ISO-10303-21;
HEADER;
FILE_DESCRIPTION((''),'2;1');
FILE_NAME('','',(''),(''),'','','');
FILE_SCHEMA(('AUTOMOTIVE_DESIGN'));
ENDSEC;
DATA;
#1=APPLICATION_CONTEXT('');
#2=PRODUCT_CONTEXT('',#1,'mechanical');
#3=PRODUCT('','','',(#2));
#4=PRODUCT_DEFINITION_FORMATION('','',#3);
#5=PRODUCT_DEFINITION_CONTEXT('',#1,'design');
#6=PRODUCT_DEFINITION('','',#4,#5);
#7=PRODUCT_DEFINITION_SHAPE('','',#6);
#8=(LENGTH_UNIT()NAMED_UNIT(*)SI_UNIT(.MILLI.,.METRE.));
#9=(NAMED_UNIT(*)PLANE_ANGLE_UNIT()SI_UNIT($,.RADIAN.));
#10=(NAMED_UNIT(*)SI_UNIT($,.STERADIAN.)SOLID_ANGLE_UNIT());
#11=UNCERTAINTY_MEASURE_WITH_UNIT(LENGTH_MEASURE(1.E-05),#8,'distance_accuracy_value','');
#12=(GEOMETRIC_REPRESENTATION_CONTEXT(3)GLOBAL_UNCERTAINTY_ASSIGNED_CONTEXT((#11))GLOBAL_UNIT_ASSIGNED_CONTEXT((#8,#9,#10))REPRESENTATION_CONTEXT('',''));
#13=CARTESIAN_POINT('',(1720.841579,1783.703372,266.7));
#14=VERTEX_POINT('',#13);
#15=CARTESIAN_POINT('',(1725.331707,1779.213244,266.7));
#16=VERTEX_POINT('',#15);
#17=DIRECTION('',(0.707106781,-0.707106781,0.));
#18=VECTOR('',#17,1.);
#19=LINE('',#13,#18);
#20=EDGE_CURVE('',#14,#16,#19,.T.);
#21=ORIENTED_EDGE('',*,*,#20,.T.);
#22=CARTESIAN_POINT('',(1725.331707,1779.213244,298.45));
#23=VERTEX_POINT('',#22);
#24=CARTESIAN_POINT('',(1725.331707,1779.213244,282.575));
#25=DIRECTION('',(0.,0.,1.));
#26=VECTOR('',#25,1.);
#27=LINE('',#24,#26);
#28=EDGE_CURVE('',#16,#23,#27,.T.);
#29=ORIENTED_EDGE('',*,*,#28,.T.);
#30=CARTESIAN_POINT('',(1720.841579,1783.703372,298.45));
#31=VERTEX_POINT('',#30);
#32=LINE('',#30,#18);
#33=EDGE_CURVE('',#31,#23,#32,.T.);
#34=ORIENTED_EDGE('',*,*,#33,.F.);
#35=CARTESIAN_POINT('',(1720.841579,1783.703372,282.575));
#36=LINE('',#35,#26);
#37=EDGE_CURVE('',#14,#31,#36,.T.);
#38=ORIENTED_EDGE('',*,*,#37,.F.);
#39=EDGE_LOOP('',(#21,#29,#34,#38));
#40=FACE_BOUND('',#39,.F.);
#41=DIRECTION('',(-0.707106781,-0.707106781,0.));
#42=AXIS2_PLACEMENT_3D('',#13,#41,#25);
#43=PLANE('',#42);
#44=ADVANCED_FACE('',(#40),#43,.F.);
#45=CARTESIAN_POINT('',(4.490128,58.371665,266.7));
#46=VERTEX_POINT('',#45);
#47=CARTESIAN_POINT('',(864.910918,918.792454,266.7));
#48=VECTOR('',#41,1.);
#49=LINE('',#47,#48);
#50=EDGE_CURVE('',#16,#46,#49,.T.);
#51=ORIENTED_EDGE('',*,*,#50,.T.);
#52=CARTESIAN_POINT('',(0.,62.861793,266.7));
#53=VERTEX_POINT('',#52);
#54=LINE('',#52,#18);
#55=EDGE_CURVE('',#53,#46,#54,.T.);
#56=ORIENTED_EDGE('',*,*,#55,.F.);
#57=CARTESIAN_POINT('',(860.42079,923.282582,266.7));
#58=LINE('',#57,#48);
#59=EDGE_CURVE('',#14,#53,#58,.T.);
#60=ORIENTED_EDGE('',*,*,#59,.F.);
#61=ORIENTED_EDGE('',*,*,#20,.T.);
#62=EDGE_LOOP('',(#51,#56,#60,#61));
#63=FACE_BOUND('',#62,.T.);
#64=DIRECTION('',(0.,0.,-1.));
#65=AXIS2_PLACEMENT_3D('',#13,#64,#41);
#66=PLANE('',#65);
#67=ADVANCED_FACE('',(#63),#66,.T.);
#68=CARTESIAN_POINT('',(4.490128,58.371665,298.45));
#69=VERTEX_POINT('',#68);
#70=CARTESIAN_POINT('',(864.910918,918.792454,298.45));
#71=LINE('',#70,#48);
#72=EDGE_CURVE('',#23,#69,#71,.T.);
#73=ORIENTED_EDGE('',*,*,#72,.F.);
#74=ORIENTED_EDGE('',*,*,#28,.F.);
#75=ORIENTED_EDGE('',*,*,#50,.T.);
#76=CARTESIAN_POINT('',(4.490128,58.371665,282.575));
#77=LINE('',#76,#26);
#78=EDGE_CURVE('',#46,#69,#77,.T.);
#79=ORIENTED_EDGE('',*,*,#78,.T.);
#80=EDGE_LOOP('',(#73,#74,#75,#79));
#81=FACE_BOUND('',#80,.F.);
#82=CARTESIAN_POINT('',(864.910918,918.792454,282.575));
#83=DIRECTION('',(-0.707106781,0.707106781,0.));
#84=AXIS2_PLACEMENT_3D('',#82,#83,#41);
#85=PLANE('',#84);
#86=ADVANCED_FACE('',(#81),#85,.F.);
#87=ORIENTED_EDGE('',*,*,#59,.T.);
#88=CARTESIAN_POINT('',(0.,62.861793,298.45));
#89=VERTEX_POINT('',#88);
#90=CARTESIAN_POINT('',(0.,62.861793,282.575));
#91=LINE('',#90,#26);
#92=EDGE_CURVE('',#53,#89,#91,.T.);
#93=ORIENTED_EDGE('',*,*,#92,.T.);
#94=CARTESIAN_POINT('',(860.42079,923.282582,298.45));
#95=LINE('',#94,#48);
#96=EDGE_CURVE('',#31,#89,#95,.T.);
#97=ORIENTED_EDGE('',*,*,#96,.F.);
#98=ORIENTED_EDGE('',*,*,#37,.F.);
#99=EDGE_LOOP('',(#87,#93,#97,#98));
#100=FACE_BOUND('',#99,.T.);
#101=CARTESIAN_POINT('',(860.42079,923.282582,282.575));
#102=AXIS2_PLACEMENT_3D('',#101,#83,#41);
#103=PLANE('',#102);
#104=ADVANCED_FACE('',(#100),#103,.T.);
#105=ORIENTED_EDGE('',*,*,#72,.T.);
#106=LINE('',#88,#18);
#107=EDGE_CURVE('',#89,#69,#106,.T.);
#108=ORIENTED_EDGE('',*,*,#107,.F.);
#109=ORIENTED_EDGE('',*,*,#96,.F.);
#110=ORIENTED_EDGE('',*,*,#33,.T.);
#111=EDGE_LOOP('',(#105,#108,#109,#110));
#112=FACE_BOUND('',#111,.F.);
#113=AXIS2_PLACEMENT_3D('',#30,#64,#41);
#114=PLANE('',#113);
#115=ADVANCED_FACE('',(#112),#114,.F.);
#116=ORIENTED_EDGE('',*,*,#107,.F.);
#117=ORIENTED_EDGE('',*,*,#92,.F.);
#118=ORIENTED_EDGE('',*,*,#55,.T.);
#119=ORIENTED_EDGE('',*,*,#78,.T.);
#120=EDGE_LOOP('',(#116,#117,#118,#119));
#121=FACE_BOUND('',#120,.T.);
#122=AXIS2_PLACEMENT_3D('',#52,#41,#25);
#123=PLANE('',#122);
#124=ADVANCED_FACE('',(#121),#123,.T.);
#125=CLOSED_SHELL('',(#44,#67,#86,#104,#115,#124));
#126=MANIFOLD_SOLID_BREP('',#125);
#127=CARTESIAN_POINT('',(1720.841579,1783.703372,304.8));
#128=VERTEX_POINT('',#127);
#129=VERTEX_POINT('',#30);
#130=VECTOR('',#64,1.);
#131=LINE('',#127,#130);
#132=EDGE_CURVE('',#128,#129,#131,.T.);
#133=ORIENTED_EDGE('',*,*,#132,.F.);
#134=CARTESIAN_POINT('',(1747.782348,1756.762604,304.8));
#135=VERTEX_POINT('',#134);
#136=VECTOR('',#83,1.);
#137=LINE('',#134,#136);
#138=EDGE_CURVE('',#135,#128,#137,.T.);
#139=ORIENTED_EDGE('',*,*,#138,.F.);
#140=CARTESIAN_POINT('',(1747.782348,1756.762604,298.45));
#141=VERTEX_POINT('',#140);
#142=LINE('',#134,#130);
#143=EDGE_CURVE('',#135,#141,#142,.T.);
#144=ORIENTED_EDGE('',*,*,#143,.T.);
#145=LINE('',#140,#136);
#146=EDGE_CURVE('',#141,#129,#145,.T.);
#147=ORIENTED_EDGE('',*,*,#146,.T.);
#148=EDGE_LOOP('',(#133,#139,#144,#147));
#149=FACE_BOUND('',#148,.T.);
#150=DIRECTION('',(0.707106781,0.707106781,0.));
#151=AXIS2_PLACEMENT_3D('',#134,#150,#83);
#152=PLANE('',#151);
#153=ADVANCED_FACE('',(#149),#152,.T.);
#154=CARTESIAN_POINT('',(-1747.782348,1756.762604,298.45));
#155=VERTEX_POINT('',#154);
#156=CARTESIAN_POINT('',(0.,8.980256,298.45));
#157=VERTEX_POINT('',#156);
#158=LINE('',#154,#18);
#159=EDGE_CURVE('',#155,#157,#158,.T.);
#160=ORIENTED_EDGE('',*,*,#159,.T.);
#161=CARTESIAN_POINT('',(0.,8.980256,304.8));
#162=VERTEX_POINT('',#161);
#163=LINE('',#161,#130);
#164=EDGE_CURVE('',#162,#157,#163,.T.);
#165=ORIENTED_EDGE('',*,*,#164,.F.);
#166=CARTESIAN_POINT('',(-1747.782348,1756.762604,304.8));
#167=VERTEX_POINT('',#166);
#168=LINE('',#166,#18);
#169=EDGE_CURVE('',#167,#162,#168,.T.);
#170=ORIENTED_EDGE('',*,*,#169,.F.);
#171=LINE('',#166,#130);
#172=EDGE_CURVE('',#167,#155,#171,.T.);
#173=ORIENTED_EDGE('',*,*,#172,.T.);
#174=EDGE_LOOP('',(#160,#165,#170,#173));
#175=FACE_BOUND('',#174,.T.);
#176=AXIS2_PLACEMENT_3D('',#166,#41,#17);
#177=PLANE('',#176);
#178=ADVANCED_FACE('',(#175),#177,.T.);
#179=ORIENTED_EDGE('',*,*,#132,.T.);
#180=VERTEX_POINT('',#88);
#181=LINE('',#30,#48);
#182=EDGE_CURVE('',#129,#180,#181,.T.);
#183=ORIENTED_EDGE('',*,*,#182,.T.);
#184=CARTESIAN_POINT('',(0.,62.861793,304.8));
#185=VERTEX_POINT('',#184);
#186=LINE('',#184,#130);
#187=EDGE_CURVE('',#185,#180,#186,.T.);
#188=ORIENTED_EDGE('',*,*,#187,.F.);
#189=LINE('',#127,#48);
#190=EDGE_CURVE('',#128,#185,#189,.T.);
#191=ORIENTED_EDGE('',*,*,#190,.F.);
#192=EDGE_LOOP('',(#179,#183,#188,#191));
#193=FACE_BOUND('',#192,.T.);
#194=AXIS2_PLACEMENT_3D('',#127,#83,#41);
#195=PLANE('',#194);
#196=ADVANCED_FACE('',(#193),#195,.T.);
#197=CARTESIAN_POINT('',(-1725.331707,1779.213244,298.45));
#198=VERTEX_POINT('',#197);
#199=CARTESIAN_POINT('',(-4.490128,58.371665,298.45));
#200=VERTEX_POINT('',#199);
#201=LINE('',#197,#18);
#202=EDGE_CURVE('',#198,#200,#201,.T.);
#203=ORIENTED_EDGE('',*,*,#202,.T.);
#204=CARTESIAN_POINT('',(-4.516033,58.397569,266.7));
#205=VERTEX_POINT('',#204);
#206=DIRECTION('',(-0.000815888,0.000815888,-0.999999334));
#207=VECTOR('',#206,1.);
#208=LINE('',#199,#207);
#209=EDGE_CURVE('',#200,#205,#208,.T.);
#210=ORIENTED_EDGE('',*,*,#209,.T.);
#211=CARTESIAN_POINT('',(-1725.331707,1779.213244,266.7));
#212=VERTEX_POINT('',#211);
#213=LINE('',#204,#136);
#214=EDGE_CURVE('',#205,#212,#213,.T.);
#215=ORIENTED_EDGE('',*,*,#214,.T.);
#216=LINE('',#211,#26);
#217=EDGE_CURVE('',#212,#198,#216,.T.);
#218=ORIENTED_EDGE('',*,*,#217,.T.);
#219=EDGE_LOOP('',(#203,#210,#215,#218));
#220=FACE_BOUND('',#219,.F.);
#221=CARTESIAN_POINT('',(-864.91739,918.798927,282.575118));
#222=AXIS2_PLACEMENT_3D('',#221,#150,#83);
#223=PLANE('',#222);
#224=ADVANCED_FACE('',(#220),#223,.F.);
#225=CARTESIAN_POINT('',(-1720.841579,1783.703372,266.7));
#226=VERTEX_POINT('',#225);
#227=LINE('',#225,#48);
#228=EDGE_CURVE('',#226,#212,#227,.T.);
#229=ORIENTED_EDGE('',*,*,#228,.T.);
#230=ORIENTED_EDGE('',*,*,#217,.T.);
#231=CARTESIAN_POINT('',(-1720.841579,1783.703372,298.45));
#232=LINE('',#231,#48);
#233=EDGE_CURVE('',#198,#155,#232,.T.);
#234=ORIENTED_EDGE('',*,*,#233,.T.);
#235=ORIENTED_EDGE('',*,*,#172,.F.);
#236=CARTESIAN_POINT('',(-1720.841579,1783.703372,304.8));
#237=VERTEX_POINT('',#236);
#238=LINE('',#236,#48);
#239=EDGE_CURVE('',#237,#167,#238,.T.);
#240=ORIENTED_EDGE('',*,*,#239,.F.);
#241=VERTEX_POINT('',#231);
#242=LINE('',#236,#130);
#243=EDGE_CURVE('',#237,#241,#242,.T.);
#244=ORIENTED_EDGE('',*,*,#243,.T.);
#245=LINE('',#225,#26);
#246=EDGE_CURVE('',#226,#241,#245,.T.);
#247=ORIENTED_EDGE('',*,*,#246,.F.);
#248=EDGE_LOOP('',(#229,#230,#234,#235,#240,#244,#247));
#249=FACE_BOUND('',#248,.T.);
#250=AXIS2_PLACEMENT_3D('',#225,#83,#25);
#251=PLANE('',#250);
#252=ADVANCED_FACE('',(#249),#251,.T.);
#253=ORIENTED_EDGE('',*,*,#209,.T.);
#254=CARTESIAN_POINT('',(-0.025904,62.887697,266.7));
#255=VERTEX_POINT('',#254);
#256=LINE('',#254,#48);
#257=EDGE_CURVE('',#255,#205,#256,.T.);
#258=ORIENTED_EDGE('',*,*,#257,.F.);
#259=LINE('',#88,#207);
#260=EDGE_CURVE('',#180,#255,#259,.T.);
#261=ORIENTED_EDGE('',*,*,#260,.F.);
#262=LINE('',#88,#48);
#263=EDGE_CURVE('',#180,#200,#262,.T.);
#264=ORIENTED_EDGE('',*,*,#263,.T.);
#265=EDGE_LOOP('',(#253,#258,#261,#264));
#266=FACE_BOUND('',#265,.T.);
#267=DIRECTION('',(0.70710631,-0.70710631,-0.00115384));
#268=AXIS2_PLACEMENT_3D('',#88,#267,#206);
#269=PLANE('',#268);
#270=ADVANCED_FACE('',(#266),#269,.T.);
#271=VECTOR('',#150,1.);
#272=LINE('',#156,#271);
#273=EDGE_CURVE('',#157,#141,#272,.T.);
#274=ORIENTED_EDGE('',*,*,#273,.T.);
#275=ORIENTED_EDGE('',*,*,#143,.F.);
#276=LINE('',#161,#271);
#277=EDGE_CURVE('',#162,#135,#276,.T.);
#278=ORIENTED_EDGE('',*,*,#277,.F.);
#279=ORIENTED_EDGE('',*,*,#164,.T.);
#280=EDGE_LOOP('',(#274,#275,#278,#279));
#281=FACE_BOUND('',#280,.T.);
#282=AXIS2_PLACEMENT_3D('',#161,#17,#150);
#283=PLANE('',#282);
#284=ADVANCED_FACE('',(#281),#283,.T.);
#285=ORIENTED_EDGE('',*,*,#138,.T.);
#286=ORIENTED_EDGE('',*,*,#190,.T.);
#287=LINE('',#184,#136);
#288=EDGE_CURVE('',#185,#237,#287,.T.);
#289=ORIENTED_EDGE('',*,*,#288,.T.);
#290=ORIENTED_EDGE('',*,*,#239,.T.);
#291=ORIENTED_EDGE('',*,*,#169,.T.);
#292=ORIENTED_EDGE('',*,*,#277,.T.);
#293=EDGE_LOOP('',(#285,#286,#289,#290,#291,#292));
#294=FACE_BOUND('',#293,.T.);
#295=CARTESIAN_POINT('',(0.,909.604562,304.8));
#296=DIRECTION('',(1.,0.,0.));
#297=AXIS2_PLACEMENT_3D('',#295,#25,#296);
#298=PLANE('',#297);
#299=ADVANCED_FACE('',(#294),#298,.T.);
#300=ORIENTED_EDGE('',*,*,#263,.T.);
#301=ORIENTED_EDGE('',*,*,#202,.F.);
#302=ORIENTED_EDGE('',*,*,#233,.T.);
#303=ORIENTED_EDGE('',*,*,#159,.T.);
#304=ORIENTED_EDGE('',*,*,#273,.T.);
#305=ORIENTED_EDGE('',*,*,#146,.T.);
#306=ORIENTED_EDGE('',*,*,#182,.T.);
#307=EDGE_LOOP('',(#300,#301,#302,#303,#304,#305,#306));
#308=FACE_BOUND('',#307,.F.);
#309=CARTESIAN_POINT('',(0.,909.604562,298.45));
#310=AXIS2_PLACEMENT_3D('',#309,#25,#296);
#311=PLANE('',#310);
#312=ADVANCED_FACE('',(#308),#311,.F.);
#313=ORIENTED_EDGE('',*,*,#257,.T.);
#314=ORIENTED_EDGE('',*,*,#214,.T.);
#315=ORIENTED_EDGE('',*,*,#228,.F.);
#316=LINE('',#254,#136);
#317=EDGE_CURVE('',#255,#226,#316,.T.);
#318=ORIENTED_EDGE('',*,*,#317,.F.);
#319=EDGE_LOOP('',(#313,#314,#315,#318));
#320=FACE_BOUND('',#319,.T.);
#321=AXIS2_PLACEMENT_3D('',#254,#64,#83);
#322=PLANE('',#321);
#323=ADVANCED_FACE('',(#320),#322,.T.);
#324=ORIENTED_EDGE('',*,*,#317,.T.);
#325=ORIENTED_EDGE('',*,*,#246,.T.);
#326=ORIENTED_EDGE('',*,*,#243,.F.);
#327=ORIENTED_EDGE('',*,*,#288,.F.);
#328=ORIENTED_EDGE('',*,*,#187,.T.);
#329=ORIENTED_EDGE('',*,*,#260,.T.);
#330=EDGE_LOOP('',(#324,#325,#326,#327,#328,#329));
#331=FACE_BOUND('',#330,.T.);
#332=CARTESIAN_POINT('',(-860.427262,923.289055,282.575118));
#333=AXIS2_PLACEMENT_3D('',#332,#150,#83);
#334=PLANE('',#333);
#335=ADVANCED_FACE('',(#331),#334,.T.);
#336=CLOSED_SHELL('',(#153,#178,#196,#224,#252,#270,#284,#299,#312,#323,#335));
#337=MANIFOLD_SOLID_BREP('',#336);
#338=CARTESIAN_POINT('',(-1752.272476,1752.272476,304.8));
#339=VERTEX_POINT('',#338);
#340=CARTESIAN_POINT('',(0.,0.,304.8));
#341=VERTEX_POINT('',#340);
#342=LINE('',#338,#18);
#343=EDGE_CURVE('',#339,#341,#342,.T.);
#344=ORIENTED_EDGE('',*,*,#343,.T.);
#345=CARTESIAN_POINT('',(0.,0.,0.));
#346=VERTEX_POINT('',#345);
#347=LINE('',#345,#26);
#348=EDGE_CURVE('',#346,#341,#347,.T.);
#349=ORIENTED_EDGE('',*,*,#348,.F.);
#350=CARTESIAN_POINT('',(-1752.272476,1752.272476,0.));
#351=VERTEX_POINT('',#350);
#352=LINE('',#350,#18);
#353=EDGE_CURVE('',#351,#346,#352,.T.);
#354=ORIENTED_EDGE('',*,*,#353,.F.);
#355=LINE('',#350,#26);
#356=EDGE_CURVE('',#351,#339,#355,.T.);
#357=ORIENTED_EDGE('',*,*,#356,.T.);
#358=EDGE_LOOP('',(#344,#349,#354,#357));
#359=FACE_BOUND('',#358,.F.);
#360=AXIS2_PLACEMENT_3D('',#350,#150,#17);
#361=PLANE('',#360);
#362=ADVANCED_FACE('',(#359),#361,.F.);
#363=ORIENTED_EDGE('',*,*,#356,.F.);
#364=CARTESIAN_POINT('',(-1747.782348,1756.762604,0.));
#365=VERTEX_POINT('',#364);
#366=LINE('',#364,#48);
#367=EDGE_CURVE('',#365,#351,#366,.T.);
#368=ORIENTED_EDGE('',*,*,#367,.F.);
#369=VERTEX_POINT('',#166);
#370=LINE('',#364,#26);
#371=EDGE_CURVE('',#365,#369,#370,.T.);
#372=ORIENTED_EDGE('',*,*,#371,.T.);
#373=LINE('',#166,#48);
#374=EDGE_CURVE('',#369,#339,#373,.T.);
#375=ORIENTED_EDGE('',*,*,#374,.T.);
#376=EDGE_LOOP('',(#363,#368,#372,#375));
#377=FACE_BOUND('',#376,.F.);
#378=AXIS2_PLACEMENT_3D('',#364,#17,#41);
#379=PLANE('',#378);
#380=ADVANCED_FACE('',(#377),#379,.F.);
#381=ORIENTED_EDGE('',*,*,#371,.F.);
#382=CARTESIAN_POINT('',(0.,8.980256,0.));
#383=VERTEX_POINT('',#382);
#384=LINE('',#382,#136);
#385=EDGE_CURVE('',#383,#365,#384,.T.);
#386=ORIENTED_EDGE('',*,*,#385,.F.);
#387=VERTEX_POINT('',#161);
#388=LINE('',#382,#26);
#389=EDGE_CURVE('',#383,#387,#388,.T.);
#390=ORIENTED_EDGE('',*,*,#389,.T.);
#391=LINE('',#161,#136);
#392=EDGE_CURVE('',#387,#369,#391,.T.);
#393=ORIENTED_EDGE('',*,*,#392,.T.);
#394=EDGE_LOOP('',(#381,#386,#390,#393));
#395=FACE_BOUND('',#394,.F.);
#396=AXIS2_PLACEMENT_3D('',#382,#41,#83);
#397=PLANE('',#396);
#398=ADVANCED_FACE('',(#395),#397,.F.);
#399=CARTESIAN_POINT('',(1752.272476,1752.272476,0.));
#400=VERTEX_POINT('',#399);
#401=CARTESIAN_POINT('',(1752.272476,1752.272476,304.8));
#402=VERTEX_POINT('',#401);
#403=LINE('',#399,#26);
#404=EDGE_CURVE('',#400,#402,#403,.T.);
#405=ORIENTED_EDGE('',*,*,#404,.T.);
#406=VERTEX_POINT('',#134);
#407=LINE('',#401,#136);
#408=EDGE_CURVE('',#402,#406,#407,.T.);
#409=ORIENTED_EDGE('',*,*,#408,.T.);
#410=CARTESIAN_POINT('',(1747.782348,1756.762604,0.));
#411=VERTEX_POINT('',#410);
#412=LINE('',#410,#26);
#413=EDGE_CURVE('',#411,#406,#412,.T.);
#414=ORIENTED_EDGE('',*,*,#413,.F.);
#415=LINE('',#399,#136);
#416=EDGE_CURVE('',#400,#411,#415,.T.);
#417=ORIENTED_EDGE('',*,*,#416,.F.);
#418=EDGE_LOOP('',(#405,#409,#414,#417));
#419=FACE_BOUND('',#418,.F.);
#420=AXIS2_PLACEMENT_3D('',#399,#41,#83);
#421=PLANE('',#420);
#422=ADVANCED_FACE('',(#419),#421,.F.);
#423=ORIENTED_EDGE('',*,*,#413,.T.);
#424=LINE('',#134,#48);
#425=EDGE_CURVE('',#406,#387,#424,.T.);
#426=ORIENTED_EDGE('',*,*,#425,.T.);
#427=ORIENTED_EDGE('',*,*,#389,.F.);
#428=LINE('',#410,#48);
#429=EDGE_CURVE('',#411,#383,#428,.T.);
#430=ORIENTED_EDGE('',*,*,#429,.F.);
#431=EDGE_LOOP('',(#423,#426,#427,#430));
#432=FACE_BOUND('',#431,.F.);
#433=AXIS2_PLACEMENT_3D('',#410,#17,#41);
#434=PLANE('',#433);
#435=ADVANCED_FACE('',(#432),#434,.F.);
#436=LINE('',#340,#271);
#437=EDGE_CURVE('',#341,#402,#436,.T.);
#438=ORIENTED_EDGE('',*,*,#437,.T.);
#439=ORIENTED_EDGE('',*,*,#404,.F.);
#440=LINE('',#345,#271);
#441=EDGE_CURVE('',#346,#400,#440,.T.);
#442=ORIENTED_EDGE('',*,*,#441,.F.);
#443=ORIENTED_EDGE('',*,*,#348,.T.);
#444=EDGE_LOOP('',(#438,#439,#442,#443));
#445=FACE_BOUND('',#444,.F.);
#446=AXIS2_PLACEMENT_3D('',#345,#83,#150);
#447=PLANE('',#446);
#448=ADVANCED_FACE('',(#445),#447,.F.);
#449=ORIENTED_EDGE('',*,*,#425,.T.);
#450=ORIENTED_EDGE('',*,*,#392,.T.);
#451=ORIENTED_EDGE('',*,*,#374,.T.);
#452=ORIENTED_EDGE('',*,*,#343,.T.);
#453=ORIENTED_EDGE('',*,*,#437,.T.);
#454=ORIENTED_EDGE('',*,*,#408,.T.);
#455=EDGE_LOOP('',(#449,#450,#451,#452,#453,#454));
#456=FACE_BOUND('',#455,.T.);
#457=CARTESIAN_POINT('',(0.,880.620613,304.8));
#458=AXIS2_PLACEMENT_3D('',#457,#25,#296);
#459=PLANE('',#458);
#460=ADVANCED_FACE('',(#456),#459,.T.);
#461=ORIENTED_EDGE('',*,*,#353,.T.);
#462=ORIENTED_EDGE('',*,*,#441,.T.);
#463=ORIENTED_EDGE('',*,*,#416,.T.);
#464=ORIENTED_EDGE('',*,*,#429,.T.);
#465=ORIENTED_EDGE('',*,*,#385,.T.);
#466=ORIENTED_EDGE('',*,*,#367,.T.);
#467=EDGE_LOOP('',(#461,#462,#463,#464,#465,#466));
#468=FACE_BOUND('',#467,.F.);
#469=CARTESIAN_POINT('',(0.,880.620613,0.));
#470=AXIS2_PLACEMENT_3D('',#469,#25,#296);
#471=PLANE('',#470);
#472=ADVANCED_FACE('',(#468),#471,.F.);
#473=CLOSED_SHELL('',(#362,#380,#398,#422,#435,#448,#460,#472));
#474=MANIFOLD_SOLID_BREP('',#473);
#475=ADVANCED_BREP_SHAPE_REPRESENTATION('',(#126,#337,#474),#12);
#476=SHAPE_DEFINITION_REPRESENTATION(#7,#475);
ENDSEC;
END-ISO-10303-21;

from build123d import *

# Parameters (mm, degrees)
F1_DEPTH = 304.8
F3_DEPTH = 6.35
F4_W     = 2433.6375
F4_H     = 31.75
F5_DEPTH = 6.35
F7_DEPTH = 6.35


with BuildPart() as f1:
    # F0 (on Top) → F1 (new body)
    with BuildSketch(Plane.XY):
        Polygon((-1752.2724756236, 1752.2724756236), (0, 0), (1752.2724756236, 1752.2724756236), (1747.7823475631, 1756.7626036842), (0, 8.9802561211), (-1747.7823475631, 1756.7626036842), align=None)
    extrude(amount=F1_DEPTH)


with BuildPart() as f3:
    # F2 (on face) → F3 (new body)
    with BuildSketch(Plane.XY.offset(304.8)):
        Polygon((-1720.8415791999, 1783.7033720474), (-1747.7823475631, 1756.7626036842), (0, 8.9802561211), (1747.7823475631, 1756.7626036842), (1720.8415791999, 1783.7033720474), (0, 62.8617928475), align=None)
    extrude(amount=-F3_DEPTH)

    # F6 (on face) → F7 (join)
    with BuildSketch(Plane(origin=(31.4308964237, 31.4308964237, 0), x_dir=(-0.7071067812, 0.7071067812, 0), z_dir=(0.7071067812, 0.7071067812, 0))):
        Polygon((2478.0875, 266.7), (2478.0875, 298.45), (44.45, 298.45), (44.4866344333, 266.7), align=None)
    extrude(amount=-F7_DEPTH)


with BuildPart() as f5:
    # F4 (on face) → F5 (new body)
    with BuildSketch(Plane(origin=(-31.4308964237, 31.4308964237, 0), x_dir=(-0.7071067812, -0.7071067812, 0), z_dir=(-0.7071067812, 0.7071067812, 0))):
        with Locations((-1261.26875, 282.575)):
            Rectangle(F4_W, F4_H)
    extrude(amount=-F5_DEPTH)


solid = Compound([f1.part, f3.part, f5.part])
